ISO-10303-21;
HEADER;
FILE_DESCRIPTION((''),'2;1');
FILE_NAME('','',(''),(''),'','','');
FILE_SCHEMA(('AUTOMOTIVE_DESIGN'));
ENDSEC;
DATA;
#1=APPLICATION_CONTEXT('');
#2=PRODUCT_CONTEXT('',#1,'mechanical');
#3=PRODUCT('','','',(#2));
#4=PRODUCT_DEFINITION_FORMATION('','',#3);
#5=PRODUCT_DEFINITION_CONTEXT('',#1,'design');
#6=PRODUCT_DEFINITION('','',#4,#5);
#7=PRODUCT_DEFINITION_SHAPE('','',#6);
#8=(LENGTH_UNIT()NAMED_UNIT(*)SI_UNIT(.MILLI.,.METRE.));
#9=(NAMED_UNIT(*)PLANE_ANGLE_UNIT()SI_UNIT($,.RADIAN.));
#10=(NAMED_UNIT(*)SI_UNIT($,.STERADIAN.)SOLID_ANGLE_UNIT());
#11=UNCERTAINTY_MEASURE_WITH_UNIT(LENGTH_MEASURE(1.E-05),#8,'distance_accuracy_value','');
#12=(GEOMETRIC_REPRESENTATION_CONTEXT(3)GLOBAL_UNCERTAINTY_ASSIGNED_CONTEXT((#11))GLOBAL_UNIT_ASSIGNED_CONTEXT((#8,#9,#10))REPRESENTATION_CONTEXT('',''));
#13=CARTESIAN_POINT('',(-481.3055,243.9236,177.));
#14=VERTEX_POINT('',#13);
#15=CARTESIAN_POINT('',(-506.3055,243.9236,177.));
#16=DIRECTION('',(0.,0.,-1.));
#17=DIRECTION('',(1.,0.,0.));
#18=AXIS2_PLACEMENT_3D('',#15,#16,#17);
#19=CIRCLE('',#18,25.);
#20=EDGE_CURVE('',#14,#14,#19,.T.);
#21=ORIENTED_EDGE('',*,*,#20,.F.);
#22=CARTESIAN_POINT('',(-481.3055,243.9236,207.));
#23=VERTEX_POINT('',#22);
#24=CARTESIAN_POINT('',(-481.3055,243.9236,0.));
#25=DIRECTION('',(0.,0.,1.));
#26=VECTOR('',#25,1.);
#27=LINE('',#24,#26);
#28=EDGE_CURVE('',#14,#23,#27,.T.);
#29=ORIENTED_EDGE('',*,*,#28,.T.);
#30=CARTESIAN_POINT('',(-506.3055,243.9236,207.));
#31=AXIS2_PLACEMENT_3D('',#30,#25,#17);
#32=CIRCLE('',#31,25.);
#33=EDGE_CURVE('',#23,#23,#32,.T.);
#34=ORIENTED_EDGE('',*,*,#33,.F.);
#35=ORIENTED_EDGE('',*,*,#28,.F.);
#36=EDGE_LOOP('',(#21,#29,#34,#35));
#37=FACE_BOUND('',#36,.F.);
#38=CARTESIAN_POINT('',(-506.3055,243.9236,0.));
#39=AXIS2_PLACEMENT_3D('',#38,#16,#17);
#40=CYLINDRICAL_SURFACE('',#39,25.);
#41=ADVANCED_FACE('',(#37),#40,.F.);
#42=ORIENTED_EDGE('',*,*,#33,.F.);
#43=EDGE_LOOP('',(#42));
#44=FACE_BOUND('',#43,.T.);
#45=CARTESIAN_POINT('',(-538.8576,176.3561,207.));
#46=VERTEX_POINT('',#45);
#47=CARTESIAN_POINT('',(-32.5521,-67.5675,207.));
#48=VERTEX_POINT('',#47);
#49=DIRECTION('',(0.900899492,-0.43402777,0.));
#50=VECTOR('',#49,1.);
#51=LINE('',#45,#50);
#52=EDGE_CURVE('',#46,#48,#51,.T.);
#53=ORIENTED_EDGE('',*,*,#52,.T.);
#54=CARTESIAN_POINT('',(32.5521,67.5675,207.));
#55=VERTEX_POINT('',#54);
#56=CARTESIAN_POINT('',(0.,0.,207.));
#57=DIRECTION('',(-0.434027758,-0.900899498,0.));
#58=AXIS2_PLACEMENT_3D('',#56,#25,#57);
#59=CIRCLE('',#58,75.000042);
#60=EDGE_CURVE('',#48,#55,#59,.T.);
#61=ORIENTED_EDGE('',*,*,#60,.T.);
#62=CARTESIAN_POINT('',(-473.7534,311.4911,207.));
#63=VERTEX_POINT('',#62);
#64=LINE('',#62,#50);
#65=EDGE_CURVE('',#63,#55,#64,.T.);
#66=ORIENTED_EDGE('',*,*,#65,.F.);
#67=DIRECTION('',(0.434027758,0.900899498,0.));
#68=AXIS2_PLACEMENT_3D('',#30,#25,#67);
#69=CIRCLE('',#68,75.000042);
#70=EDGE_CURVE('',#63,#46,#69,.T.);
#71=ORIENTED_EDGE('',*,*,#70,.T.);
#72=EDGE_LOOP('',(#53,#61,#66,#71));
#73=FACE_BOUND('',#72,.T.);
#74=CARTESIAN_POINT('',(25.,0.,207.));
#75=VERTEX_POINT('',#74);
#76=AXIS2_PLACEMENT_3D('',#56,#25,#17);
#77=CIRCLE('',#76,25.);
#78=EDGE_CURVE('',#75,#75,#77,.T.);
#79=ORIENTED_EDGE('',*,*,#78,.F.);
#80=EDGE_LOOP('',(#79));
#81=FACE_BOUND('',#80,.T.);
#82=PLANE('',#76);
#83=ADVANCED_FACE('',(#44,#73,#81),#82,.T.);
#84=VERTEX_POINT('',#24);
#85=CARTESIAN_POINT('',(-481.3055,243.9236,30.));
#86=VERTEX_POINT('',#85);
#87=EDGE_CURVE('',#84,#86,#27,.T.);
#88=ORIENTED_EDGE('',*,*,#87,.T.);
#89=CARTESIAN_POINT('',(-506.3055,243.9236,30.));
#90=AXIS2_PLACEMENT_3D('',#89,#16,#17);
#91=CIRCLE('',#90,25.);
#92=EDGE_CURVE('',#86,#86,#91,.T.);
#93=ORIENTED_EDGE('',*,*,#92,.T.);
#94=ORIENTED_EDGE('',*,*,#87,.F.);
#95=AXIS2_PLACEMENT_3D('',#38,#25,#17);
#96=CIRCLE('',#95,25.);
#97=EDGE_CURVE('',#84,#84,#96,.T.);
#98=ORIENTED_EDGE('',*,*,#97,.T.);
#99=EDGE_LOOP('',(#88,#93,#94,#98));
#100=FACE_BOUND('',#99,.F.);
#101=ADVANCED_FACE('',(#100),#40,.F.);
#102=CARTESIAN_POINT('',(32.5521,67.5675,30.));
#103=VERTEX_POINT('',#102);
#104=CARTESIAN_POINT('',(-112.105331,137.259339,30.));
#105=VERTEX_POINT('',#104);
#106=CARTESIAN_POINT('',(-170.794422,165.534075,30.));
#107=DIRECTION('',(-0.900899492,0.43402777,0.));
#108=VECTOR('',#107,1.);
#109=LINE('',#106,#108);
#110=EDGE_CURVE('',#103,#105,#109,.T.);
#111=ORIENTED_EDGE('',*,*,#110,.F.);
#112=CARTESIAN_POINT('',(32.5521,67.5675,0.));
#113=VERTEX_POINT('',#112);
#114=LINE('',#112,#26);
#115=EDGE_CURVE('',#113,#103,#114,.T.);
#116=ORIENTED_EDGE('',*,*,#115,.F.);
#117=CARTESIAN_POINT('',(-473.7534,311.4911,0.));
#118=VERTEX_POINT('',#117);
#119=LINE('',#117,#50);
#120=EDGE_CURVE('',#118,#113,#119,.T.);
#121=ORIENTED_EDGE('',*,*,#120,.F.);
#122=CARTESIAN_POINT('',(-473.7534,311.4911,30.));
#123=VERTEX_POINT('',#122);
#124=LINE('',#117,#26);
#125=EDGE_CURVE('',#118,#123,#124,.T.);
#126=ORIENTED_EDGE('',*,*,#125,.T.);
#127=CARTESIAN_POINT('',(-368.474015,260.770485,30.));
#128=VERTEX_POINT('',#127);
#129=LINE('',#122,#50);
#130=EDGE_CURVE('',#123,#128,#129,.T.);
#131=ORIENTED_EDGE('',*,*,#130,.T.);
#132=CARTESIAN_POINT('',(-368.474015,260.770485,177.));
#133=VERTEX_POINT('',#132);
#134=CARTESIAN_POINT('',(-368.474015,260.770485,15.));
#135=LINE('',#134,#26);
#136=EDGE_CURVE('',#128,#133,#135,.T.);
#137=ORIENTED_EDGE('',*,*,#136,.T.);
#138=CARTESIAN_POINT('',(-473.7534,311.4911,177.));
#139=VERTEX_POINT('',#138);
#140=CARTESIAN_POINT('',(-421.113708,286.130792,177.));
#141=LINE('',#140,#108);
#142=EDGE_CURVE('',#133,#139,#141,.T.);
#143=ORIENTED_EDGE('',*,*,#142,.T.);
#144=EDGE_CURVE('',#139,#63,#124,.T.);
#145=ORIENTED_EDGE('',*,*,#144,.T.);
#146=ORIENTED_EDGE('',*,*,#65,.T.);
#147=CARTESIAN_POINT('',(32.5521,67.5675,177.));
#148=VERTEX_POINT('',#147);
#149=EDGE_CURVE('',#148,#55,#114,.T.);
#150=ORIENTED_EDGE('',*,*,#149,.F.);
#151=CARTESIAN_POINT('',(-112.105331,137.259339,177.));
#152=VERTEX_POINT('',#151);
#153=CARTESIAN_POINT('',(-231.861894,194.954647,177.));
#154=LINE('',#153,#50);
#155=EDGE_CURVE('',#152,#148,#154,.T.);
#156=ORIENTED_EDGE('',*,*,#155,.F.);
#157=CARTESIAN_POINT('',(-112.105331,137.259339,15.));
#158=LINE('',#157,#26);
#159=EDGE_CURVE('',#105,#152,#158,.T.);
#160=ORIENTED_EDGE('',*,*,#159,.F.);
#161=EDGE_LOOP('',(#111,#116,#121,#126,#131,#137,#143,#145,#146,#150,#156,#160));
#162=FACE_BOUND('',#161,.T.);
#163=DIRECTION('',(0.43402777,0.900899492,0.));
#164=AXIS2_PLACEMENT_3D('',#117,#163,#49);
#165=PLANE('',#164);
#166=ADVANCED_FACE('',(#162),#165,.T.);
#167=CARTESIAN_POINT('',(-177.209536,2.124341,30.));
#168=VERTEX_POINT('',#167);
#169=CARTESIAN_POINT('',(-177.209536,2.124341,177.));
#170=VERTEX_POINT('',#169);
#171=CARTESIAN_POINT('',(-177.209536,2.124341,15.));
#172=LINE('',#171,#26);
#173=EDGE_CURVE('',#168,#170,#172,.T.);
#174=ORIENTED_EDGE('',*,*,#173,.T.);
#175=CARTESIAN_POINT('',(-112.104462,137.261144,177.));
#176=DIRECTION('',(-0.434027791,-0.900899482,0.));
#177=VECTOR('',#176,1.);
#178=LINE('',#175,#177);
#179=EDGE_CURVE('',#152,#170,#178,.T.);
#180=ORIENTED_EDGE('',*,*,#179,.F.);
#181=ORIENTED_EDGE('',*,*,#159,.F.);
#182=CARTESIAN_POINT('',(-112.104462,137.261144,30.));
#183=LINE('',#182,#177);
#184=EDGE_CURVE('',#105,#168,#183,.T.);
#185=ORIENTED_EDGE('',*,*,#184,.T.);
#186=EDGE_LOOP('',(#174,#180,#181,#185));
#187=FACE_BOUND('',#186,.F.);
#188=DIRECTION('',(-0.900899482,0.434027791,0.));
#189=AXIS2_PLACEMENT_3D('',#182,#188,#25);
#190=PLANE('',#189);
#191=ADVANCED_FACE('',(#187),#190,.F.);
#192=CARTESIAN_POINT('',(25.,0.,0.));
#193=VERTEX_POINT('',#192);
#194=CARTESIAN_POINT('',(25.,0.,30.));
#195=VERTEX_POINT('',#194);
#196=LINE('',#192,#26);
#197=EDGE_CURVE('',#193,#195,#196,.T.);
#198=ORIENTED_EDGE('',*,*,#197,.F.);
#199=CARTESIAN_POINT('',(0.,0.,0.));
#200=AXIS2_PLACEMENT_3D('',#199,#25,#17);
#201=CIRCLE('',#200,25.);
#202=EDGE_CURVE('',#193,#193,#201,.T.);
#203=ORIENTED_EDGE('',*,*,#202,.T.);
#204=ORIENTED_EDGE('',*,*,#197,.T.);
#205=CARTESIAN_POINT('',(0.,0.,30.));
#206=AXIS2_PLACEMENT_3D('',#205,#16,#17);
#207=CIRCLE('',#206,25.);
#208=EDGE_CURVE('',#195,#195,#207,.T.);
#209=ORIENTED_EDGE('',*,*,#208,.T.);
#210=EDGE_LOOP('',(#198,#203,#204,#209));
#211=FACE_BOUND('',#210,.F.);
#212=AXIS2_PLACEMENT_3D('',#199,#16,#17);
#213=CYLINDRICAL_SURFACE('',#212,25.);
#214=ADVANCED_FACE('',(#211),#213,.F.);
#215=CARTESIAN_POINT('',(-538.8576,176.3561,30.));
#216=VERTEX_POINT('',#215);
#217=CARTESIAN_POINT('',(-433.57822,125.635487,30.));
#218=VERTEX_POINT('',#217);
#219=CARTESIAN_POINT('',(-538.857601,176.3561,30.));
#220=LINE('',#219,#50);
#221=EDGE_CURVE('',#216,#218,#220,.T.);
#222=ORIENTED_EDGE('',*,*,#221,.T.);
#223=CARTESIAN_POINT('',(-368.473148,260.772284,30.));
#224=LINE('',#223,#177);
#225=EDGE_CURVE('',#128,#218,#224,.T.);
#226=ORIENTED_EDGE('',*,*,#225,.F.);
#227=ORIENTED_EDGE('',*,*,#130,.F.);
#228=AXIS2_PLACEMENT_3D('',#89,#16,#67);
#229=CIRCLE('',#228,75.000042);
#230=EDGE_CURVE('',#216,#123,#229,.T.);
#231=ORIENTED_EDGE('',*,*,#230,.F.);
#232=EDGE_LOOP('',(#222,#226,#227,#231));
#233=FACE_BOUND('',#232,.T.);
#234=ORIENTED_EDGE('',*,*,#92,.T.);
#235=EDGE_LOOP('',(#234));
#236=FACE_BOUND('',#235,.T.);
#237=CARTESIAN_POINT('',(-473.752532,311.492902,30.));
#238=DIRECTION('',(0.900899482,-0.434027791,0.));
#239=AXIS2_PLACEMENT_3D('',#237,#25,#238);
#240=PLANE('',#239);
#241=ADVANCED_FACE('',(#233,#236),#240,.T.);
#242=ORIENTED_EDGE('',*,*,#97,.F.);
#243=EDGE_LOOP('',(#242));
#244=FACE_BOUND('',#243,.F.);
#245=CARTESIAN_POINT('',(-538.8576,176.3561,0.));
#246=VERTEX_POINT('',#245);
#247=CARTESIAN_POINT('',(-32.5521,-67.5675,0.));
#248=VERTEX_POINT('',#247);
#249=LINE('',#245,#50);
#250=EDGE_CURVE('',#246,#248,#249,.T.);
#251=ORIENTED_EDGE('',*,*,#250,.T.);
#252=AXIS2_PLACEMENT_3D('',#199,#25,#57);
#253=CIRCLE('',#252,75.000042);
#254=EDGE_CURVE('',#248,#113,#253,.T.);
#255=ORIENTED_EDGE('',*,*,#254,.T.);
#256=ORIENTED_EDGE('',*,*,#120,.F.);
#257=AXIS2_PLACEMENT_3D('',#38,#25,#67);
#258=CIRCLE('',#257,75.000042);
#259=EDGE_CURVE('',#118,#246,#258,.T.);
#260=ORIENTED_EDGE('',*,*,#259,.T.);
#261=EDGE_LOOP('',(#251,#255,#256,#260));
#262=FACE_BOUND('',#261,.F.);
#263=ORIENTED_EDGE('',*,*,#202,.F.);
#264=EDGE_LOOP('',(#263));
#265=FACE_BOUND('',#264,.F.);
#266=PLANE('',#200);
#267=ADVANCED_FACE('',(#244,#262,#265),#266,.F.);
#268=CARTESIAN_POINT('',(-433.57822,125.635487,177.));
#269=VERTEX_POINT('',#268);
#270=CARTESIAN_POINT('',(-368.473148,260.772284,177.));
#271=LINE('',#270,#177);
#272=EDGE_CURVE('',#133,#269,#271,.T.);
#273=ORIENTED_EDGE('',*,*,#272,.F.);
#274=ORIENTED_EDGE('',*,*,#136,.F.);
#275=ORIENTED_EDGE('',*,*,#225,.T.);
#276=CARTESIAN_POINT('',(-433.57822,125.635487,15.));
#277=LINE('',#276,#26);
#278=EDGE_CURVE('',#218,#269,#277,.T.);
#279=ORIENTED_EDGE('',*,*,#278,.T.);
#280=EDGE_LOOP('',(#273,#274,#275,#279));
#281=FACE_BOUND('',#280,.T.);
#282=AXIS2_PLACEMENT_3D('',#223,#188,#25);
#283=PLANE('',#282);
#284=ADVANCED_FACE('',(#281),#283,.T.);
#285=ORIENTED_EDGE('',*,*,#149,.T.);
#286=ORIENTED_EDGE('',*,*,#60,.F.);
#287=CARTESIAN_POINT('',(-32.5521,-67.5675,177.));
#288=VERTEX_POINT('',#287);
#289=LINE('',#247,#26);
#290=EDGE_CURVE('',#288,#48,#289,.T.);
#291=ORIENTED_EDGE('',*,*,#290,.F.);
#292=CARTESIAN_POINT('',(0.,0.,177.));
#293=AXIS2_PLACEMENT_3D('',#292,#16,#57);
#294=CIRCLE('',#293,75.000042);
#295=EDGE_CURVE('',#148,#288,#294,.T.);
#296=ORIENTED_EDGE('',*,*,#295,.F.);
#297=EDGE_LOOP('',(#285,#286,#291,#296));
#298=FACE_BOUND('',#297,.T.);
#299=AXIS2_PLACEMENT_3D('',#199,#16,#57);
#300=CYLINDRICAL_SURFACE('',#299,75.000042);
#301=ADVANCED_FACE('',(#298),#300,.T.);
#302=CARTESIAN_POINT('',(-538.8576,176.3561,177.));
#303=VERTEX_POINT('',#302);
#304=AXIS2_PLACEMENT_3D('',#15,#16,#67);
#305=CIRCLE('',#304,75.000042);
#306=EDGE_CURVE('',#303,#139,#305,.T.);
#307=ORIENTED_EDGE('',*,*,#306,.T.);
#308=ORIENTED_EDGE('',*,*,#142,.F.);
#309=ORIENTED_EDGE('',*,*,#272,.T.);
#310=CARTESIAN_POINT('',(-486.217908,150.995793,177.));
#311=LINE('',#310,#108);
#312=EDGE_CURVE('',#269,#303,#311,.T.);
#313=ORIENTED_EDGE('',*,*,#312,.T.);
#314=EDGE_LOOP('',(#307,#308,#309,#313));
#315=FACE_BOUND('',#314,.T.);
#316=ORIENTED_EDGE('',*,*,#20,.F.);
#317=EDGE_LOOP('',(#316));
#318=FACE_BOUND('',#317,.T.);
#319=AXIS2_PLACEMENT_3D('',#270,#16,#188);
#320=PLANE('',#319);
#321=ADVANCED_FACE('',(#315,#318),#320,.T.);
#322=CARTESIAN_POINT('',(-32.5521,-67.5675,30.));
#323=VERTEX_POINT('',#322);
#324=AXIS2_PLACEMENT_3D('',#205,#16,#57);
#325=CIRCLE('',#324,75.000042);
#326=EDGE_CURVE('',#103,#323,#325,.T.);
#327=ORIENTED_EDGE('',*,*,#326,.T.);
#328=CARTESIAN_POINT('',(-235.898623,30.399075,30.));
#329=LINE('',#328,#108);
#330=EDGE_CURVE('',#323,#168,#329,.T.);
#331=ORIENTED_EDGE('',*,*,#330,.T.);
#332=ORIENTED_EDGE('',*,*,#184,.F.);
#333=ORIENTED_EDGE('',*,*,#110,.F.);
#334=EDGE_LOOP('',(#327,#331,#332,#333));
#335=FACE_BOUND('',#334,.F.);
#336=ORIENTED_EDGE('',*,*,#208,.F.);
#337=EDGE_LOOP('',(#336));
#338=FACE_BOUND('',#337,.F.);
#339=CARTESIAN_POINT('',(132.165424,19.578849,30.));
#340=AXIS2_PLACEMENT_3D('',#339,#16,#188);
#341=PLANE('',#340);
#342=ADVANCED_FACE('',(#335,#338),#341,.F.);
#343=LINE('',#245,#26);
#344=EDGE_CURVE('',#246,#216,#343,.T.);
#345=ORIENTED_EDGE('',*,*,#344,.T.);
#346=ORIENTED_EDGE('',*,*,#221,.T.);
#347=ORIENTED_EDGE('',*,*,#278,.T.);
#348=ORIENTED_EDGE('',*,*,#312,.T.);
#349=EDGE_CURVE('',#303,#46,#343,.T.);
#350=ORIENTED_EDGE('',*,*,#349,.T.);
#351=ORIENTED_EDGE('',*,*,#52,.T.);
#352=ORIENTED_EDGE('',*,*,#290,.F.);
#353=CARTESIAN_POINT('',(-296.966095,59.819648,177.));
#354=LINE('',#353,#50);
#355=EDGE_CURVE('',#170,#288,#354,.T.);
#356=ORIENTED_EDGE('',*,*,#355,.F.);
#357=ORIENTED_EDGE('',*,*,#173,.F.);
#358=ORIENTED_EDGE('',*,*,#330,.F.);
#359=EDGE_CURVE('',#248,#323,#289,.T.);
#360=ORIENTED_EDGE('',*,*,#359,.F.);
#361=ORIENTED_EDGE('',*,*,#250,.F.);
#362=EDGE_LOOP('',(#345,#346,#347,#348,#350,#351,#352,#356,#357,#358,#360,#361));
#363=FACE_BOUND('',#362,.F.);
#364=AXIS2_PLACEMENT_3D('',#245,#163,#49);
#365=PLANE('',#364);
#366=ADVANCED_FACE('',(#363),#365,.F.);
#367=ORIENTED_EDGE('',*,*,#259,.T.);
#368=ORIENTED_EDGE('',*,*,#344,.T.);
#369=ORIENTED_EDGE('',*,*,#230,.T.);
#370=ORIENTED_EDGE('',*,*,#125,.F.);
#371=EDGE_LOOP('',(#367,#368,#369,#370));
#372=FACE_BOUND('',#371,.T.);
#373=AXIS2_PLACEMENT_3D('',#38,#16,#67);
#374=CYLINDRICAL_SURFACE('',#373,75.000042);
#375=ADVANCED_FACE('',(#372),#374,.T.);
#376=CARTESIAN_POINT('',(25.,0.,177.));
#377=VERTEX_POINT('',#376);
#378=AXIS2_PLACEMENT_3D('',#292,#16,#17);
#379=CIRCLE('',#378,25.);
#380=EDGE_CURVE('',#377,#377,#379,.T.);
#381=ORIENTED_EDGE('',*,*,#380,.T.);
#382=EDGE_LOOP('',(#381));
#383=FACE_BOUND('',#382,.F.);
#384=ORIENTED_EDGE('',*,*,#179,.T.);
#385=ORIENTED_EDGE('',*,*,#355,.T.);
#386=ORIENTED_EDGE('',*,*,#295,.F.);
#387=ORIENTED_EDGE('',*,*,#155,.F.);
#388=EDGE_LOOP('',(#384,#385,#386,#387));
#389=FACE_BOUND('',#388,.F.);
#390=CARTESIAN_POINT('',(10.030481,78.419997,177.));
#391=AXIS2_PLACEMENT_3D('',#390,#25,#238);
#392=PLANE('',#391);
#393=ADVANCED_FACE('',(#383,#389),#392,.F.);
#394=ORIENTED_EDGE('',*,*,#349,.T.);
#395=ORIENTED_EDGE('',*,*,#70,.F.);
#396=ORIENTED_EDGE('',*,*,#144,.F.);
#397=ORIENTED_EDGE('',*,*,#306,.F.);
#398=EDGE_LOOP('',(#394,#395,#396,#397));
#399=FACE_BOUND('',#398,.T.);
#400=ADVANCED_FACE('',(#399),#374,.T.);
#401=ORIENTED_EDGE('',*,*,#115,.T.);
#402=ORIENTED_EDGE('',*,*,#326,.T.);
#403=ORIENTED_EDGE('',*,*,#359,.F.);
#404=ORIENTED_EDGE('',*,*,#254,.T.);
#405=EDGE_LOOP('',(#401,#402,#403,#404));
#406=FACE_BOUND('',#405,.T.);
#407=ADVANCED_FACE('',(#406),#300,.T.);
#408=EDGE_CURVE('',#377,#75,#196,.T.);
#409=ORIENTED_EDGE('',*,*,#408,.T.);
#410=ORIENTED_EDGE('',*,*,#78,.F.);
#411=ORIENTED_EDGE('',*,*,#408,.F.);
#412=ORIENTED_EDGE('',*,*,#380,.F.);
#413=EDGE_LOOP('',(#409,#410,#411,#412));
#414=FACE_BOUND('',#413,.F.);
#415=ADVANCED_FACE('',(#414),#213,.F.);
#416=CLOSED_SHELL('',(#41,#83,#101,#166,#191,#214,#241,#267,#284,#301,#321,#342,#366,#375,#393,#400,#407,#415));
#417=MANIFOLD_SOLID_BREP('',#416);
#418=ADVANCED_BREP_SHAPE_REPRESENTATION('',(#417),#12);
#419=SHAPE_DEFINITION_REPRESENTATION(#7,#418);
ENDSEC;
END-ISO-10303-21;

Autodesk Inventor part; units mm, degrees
ref_plane "YZ Plane" through (0, 0, 0) normal (1, 0, 0) x (0, 1, 0)
ref_plane "XZ Plane" through (0, 0, 0) normal (0, 1, 0) x (-1, 0, 0)
ref_plane "XY Plane" through (0, 0, 0) normal (0, 0, 1) x (1, 0, 0)
sketch "Sketch1" plane through (0, 0, 0) normal (0, 0, 1) x (1, 0, 0)
  arc A0 (-32.5521, -67.5675) -> (32.5521, 67.5675) centre (0, 0) ccw
  circle A1 centre (0, 0) radius 25
  arc A2 (-473.7534, 311.4911) -> (-538.8576, 176.3561) centre (-506.3055, 243.9236) ccw
  circle A3 centre (-506.3055, 243.9236) radius 25
  line L0 (-473.7534, 311.4911) -> (32.5521, 67.5675)
  line L1 (-538.8576, 176.3561) -> (-32.5521, -67.5675)
  dimension "d0" = 150
  dimension "d1" = 50
  dimension "d2" = 150
  dimension "d3" = 50
  dimension "d4" = 562
extrude "Extrusion1" add sketch "Sketch1" along normal blind 207
sketch "Sketch2" plane through (-473.7534, 311.4911, 207) normal (0.4340278, 0.9008995, 0) x (0.9008995, -0.4340278, 0)
  line L0 (116.8603, 30) -> (-116.8603, 30)
  line L1 (-116.8603, 30) -> (-116.8603, 177)
  line L2 (-116.8603, 177) -> (116.8603, 177)
  line L3 (116.8603, 177) -> (116.8603, 30)
  line L4 (0, 207) -> (0, 0) projected
  line L5 (116.8603, 30) -> (-116.8603, 177) construction
  line L6 (-116.8603, 30) -> (116.8603, 177) construction
  line L7 (-75, 0) -> (0, 0) projected
  point P0 (562, 207)
  point P1 (0, 103.5)
  dimension "d7" = 30
extrude "Extrusion2" cut sketch "Sketch2" against normal blind 207
sketch "Sketch3" plane through (32.5521, 67.5675, 207) normal (0.4340278, 0.9008995, 0) x (0.9008995, -0.4340278, 0)
  line L0 (110.57, 177) -> (-160.57, 177)
  line L1 (-160.57, 177) -> (-160.57, 30)
  line L2 (-160.57, 30) -> (110.57, 30)
  line L3 (110.57, 30) -> (110.57, 177)
  line L4 (-25, 0) -> (-25, 207) projected
  line L5 (110.57, 177) -> (-160.57, 30) construction
  line L6 (-160.57, 177) -> (110.57, 30) construction
  point P0 (0, 207)
  point P1 (-25, 103.5)
  dimension "d10" = 30
extrude "Extrusion3" cut sketch "Sketch3" against normal blind 207
properties part number "SECOND ARM"
